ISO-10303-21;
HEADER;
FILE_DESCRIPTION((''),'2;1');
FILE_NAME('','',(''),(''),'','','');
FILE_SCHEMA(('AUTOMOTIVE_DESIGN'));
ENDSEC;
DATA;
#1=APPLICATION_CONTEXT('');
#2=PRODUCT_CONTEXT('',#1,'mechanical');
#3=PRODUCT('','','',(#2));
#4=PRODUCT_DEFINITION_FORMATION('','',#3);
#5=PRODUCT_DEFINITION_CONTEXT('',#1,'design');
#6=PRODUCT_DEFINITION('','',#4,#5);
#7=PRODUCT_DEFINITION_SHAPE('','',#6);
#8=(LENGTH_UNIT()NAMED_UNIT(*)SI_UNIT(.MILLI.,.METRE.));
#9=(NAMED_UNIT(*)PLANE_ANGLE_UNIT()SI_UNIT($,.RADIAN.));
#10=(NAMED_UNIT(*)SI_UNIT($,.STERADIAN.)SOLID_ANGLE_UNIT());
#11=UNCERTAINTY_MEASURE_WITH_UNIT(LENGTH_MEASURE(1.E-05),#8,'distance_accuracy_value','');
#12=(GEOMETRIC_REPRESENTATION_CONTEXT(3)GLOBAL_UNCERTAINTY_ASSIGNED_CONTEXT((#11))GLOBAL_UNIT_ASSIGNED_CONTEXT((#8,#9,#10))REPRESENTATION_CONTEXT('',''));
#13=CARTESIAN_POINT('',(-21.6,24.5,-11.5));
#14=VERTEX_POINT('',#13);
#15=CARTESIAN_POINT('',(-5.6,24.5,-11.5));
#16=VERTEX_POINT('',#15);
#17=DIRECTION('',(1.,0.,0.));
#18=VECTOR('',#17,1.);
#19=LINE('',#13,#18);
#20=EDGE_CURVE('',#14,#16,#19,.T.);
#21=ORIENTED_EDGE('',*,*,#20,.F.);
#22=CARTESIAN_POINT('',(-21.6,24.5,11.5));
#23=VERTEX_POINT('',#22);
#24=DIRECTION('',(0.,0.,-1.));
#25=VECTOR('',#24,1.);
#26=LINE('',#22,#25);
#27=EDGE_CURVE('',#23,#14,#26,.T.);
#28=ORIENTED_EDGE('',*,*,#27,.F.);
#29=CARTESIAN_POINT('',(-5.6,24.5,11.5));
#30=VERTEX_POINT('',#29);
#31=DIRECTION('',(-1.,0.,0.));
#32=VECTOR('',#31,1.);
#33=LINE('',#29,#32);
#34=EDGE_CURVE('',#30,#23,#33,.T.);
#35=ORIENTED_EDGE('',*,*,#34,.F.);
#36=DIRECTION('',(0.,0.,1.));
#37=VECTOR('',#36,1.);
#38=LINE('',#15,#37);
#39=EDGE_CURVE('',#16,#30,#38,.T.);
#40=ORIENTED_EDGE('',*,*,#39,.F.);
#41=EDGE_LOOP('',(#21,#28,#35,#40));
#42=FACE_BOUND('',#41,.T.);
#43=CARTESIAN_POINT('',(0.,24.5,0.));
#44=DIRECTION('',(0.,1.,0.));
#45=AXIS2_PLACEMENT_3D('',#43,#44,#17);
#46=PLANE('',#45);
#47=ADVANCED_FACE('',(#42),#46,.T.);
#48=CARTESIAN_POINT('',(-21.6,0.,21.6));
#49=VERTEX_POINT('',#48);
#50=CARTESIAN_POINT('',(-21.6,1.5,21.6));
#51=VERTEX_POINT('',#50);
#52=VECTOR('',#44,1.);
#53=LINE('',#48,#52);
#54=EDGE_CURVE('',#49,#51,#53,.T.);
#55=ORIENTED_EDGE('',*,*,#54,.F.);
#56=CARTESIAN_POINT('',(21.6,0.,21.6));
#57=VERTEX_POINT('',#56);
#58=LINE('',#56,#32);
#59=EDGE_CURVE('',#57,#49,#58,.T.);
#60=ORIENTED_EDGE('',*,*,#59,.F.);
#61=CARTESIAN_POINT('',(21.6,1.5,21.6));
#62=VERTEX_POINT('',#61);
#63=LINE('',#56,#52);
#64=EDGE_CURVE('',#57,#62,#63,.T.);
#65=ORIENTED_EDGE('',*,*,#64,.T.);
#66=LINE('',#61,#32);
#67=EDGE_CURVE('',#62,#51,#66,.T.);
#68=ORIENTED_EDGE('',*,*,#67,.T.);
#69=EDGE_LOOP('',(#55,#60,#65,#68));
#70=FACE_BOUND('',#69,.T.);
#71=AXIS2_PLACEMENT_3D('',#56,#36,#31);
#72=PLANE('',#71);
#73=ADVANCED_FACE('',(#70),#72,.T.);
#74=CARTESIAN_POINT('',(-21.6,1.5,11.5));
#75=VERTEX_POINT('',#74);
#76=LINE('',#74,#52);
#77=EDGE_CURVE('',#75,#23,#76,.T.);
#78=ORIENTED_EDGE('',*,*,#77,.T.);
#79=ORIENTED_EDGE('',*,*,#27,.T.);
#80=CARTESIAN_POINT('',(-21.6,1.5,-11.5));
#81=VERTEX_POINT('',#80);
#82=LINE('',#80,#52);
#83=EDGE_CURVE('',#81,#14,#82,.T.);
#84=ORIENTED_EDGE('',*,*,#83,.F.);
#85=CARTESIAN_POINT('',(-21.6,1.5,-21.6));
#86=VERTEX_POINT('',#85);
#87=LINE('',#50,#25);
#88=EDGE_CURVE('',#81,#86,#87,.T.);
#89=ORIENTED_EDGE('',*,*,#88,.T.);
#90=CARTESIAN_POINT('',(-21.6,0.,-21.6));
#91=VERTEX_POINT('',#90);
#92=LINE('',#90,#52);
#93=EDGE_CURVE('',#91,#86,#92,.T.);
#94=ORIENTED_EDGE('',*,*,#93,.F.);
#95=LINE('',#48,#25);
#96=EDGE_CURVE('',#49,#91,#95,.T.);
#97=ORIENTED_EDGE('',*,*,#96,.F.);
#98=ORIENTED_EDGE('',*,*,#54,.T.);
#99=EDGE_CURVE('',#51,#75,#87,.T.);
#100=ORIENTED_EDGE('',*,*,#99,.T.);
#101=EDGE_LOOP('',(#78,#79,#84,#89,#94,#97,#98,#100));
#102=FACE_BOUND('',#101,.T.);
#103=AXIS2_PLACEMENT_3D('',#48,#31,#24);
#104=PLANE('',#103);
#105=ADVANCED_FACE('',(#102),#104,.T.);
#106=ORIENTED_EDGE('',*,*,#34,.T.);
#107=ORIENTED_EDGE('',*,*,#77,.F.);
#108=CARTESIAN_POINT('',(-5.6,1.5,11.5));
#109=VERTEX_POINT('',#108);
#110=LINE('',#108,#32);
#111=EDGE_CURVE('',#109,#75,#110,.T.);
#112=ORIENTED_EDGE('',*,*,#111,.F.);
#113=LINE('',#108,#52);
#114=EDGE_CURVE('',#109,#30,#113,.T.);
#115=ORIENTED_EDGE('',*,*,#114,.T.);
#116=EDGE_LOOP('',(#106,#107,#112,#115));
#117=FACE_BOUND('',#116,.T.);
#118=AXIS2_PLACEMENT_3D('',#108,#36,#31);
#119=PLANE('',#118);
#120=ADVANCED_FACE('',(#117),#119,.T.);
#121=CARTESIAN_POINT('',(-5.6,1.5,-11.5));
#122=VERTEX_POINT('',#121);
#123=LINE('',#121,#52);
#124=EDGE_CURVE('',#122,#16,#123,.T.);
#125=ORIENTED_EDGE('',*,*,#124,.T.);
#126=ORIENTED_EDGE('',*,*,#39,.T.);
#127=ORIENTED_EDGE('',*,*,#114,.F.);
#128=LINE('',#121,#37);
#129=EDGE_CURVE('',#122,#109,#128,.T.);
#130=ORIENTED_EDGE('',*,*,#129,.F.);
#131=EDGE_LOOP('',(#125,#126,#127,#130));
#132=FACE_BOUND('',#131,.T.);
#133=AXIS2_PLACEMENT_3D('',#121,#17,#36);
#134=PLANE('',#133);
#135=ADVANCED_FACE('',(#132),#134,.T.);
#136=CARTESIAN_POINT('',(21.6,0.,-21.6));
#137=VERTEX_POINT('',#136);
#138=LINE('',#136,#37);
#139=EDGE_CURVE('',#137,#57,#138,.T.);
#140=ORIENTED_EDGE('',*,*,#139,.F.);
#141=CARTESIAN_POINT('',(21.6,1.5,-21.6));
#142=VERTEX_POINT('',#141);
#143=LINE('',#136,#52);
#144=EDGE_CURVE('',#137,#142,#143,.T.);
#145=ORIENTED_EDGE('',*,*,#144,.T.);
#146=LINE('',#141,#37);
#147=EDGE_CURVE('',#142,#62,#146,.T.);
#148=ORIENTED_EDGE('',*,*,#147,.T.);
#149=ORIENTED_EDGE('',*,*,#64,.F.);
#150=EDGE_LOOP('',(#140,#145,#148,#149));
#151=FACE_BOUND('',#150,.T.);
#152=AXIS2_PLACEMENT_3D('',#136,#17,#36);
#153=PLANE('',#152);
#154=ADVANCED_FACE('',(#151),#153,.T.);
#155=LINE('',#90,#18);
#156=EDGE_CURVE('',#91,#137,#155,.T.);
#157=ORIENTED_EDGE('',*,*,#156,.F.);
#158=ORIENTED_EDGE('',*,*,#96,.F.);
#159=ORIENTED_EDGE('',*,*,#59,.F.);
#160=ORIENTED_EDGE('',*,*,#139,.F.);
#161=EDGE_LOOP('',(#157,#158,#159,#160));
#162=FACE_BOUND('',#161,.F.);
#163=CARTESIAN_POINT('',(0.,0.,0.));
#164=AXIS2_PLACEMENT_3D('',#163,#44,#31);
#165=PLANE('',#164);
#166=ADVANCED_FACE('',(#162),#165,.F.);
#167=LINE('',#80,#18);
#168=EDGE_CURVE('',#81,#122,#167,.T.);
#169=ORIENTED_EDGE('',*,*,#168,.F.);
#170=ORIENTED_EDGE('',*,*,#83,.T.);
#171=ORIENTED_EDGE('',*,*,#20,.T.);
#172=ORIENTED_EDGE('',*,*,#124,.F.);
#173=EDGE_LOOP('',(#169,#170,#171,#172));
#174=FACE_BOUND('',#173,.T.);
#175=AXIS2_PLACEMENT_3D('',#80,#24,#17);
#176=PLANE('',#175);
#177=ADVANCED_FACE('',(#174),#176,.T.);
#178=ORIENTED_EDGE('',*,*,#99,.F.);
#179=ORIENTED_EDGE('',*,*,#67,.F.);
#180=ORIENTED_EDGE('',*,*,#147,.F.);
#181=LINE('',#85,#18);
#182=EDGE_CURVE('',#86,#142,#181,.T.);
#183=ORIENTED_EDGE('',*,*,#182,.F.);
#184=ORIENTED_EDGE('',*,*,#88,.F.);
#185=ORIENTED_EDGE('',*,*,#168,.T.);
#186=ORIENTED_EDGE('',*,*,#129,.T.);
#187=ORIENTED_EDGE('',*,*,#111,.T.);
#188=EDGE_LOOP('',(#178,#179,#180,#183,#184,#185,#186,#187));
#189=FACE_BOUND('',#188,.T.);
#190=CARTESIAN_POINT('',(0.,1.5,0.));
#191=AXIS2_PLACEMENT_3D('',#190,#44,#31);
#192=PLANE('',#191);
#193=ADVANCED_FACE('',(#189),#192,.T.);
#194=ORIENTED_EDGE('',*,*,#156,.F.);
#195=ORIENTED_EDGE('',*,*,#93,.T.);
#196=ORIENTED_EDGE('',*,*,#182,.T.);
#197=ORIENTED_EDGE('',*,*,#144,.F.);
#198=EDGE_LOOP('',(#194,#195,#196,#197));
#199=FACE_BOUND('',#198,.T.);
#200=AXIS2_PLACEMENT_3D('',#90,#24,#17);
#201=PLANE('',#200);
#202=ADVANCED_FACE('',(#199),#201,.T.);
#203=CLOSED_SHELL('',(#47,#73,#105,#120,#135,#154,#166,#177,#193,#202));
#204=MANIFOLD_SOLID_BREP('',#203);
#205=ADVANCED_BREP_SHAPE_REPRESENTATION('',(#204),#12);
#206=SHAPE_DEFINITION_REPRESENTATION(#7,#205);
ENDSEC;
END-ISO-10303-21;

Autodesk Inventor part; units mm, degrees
ref_plane "YZ Plane" through (0, 0, 0) normal (1, 0, 0) x (0, 1, 0)
ref_plane "XZ Plane" through (0, 0, 0) normal (0, 1, 0) x (-1, 0, 0)
ref_plane "XY Plane" through (0, 0, 0) normal (0, 0, 1) x (1, 0, 0)
sketch "Sketch1" plane through (0, 0, 0) normal (0, 1, 0) x (-1, 0, 0)
  line L0 (-43.2, 43.2) -> (43.2, 43.2)
  line L1 (43.2, 43.2) -> (43.2, -43.2)
  line L2 (43.2, -43.2) -> (-43.2, -43.2)
  line L3 (-43.2, -43.2) -> (-43.2, 43.2)
  line L4 (-43.2, 43.2) -> (43.2, -43.2) construction
  line L5 (43.2, 43.2) -> (-43.2, -43.2) construction
  point P0 (0, 0)
  dimension "d0" = 86.4
  dimension "d1" = 86.4
extrude "Extrusion1" add sketch "Sketch1" along normal blind 3
sketch "Sketch2" plane through (0, 3, 0) normal (0, 1, 0) x (1, 0, 0)
  line L0 (-43.2, -43.2) -> (43.2, -43.2) projected
  line L1 (-43.2, -43.2) -> (-11.2, -43.2)
  line L2 (-11.2, -23) -> (-43.2, -23)
  line L3 (-43.2, -23) -> (-43.2, 23)
  line L4 (-43.2, 23) -> (-11.2, 23)
  line L5 (-11.2, 23) -> (-11.2, -23)
  line L6 (-11.2, -23) -> (-43.2, 23) construction
  line L7 (-43.2, -23) -> (-11.2, 23) construction
  point P0 (0, 0)
  point P1 (-27.2, 0)
  dimension "d5" = 46
extrude "Extrusion2" add sketch "Sketch2" along normal blind 46
scale "Scale1" factors (0.5, 0.5, 0.5) then translate (0, 0, 0) bodies 1
properties part number "DCDriver"
